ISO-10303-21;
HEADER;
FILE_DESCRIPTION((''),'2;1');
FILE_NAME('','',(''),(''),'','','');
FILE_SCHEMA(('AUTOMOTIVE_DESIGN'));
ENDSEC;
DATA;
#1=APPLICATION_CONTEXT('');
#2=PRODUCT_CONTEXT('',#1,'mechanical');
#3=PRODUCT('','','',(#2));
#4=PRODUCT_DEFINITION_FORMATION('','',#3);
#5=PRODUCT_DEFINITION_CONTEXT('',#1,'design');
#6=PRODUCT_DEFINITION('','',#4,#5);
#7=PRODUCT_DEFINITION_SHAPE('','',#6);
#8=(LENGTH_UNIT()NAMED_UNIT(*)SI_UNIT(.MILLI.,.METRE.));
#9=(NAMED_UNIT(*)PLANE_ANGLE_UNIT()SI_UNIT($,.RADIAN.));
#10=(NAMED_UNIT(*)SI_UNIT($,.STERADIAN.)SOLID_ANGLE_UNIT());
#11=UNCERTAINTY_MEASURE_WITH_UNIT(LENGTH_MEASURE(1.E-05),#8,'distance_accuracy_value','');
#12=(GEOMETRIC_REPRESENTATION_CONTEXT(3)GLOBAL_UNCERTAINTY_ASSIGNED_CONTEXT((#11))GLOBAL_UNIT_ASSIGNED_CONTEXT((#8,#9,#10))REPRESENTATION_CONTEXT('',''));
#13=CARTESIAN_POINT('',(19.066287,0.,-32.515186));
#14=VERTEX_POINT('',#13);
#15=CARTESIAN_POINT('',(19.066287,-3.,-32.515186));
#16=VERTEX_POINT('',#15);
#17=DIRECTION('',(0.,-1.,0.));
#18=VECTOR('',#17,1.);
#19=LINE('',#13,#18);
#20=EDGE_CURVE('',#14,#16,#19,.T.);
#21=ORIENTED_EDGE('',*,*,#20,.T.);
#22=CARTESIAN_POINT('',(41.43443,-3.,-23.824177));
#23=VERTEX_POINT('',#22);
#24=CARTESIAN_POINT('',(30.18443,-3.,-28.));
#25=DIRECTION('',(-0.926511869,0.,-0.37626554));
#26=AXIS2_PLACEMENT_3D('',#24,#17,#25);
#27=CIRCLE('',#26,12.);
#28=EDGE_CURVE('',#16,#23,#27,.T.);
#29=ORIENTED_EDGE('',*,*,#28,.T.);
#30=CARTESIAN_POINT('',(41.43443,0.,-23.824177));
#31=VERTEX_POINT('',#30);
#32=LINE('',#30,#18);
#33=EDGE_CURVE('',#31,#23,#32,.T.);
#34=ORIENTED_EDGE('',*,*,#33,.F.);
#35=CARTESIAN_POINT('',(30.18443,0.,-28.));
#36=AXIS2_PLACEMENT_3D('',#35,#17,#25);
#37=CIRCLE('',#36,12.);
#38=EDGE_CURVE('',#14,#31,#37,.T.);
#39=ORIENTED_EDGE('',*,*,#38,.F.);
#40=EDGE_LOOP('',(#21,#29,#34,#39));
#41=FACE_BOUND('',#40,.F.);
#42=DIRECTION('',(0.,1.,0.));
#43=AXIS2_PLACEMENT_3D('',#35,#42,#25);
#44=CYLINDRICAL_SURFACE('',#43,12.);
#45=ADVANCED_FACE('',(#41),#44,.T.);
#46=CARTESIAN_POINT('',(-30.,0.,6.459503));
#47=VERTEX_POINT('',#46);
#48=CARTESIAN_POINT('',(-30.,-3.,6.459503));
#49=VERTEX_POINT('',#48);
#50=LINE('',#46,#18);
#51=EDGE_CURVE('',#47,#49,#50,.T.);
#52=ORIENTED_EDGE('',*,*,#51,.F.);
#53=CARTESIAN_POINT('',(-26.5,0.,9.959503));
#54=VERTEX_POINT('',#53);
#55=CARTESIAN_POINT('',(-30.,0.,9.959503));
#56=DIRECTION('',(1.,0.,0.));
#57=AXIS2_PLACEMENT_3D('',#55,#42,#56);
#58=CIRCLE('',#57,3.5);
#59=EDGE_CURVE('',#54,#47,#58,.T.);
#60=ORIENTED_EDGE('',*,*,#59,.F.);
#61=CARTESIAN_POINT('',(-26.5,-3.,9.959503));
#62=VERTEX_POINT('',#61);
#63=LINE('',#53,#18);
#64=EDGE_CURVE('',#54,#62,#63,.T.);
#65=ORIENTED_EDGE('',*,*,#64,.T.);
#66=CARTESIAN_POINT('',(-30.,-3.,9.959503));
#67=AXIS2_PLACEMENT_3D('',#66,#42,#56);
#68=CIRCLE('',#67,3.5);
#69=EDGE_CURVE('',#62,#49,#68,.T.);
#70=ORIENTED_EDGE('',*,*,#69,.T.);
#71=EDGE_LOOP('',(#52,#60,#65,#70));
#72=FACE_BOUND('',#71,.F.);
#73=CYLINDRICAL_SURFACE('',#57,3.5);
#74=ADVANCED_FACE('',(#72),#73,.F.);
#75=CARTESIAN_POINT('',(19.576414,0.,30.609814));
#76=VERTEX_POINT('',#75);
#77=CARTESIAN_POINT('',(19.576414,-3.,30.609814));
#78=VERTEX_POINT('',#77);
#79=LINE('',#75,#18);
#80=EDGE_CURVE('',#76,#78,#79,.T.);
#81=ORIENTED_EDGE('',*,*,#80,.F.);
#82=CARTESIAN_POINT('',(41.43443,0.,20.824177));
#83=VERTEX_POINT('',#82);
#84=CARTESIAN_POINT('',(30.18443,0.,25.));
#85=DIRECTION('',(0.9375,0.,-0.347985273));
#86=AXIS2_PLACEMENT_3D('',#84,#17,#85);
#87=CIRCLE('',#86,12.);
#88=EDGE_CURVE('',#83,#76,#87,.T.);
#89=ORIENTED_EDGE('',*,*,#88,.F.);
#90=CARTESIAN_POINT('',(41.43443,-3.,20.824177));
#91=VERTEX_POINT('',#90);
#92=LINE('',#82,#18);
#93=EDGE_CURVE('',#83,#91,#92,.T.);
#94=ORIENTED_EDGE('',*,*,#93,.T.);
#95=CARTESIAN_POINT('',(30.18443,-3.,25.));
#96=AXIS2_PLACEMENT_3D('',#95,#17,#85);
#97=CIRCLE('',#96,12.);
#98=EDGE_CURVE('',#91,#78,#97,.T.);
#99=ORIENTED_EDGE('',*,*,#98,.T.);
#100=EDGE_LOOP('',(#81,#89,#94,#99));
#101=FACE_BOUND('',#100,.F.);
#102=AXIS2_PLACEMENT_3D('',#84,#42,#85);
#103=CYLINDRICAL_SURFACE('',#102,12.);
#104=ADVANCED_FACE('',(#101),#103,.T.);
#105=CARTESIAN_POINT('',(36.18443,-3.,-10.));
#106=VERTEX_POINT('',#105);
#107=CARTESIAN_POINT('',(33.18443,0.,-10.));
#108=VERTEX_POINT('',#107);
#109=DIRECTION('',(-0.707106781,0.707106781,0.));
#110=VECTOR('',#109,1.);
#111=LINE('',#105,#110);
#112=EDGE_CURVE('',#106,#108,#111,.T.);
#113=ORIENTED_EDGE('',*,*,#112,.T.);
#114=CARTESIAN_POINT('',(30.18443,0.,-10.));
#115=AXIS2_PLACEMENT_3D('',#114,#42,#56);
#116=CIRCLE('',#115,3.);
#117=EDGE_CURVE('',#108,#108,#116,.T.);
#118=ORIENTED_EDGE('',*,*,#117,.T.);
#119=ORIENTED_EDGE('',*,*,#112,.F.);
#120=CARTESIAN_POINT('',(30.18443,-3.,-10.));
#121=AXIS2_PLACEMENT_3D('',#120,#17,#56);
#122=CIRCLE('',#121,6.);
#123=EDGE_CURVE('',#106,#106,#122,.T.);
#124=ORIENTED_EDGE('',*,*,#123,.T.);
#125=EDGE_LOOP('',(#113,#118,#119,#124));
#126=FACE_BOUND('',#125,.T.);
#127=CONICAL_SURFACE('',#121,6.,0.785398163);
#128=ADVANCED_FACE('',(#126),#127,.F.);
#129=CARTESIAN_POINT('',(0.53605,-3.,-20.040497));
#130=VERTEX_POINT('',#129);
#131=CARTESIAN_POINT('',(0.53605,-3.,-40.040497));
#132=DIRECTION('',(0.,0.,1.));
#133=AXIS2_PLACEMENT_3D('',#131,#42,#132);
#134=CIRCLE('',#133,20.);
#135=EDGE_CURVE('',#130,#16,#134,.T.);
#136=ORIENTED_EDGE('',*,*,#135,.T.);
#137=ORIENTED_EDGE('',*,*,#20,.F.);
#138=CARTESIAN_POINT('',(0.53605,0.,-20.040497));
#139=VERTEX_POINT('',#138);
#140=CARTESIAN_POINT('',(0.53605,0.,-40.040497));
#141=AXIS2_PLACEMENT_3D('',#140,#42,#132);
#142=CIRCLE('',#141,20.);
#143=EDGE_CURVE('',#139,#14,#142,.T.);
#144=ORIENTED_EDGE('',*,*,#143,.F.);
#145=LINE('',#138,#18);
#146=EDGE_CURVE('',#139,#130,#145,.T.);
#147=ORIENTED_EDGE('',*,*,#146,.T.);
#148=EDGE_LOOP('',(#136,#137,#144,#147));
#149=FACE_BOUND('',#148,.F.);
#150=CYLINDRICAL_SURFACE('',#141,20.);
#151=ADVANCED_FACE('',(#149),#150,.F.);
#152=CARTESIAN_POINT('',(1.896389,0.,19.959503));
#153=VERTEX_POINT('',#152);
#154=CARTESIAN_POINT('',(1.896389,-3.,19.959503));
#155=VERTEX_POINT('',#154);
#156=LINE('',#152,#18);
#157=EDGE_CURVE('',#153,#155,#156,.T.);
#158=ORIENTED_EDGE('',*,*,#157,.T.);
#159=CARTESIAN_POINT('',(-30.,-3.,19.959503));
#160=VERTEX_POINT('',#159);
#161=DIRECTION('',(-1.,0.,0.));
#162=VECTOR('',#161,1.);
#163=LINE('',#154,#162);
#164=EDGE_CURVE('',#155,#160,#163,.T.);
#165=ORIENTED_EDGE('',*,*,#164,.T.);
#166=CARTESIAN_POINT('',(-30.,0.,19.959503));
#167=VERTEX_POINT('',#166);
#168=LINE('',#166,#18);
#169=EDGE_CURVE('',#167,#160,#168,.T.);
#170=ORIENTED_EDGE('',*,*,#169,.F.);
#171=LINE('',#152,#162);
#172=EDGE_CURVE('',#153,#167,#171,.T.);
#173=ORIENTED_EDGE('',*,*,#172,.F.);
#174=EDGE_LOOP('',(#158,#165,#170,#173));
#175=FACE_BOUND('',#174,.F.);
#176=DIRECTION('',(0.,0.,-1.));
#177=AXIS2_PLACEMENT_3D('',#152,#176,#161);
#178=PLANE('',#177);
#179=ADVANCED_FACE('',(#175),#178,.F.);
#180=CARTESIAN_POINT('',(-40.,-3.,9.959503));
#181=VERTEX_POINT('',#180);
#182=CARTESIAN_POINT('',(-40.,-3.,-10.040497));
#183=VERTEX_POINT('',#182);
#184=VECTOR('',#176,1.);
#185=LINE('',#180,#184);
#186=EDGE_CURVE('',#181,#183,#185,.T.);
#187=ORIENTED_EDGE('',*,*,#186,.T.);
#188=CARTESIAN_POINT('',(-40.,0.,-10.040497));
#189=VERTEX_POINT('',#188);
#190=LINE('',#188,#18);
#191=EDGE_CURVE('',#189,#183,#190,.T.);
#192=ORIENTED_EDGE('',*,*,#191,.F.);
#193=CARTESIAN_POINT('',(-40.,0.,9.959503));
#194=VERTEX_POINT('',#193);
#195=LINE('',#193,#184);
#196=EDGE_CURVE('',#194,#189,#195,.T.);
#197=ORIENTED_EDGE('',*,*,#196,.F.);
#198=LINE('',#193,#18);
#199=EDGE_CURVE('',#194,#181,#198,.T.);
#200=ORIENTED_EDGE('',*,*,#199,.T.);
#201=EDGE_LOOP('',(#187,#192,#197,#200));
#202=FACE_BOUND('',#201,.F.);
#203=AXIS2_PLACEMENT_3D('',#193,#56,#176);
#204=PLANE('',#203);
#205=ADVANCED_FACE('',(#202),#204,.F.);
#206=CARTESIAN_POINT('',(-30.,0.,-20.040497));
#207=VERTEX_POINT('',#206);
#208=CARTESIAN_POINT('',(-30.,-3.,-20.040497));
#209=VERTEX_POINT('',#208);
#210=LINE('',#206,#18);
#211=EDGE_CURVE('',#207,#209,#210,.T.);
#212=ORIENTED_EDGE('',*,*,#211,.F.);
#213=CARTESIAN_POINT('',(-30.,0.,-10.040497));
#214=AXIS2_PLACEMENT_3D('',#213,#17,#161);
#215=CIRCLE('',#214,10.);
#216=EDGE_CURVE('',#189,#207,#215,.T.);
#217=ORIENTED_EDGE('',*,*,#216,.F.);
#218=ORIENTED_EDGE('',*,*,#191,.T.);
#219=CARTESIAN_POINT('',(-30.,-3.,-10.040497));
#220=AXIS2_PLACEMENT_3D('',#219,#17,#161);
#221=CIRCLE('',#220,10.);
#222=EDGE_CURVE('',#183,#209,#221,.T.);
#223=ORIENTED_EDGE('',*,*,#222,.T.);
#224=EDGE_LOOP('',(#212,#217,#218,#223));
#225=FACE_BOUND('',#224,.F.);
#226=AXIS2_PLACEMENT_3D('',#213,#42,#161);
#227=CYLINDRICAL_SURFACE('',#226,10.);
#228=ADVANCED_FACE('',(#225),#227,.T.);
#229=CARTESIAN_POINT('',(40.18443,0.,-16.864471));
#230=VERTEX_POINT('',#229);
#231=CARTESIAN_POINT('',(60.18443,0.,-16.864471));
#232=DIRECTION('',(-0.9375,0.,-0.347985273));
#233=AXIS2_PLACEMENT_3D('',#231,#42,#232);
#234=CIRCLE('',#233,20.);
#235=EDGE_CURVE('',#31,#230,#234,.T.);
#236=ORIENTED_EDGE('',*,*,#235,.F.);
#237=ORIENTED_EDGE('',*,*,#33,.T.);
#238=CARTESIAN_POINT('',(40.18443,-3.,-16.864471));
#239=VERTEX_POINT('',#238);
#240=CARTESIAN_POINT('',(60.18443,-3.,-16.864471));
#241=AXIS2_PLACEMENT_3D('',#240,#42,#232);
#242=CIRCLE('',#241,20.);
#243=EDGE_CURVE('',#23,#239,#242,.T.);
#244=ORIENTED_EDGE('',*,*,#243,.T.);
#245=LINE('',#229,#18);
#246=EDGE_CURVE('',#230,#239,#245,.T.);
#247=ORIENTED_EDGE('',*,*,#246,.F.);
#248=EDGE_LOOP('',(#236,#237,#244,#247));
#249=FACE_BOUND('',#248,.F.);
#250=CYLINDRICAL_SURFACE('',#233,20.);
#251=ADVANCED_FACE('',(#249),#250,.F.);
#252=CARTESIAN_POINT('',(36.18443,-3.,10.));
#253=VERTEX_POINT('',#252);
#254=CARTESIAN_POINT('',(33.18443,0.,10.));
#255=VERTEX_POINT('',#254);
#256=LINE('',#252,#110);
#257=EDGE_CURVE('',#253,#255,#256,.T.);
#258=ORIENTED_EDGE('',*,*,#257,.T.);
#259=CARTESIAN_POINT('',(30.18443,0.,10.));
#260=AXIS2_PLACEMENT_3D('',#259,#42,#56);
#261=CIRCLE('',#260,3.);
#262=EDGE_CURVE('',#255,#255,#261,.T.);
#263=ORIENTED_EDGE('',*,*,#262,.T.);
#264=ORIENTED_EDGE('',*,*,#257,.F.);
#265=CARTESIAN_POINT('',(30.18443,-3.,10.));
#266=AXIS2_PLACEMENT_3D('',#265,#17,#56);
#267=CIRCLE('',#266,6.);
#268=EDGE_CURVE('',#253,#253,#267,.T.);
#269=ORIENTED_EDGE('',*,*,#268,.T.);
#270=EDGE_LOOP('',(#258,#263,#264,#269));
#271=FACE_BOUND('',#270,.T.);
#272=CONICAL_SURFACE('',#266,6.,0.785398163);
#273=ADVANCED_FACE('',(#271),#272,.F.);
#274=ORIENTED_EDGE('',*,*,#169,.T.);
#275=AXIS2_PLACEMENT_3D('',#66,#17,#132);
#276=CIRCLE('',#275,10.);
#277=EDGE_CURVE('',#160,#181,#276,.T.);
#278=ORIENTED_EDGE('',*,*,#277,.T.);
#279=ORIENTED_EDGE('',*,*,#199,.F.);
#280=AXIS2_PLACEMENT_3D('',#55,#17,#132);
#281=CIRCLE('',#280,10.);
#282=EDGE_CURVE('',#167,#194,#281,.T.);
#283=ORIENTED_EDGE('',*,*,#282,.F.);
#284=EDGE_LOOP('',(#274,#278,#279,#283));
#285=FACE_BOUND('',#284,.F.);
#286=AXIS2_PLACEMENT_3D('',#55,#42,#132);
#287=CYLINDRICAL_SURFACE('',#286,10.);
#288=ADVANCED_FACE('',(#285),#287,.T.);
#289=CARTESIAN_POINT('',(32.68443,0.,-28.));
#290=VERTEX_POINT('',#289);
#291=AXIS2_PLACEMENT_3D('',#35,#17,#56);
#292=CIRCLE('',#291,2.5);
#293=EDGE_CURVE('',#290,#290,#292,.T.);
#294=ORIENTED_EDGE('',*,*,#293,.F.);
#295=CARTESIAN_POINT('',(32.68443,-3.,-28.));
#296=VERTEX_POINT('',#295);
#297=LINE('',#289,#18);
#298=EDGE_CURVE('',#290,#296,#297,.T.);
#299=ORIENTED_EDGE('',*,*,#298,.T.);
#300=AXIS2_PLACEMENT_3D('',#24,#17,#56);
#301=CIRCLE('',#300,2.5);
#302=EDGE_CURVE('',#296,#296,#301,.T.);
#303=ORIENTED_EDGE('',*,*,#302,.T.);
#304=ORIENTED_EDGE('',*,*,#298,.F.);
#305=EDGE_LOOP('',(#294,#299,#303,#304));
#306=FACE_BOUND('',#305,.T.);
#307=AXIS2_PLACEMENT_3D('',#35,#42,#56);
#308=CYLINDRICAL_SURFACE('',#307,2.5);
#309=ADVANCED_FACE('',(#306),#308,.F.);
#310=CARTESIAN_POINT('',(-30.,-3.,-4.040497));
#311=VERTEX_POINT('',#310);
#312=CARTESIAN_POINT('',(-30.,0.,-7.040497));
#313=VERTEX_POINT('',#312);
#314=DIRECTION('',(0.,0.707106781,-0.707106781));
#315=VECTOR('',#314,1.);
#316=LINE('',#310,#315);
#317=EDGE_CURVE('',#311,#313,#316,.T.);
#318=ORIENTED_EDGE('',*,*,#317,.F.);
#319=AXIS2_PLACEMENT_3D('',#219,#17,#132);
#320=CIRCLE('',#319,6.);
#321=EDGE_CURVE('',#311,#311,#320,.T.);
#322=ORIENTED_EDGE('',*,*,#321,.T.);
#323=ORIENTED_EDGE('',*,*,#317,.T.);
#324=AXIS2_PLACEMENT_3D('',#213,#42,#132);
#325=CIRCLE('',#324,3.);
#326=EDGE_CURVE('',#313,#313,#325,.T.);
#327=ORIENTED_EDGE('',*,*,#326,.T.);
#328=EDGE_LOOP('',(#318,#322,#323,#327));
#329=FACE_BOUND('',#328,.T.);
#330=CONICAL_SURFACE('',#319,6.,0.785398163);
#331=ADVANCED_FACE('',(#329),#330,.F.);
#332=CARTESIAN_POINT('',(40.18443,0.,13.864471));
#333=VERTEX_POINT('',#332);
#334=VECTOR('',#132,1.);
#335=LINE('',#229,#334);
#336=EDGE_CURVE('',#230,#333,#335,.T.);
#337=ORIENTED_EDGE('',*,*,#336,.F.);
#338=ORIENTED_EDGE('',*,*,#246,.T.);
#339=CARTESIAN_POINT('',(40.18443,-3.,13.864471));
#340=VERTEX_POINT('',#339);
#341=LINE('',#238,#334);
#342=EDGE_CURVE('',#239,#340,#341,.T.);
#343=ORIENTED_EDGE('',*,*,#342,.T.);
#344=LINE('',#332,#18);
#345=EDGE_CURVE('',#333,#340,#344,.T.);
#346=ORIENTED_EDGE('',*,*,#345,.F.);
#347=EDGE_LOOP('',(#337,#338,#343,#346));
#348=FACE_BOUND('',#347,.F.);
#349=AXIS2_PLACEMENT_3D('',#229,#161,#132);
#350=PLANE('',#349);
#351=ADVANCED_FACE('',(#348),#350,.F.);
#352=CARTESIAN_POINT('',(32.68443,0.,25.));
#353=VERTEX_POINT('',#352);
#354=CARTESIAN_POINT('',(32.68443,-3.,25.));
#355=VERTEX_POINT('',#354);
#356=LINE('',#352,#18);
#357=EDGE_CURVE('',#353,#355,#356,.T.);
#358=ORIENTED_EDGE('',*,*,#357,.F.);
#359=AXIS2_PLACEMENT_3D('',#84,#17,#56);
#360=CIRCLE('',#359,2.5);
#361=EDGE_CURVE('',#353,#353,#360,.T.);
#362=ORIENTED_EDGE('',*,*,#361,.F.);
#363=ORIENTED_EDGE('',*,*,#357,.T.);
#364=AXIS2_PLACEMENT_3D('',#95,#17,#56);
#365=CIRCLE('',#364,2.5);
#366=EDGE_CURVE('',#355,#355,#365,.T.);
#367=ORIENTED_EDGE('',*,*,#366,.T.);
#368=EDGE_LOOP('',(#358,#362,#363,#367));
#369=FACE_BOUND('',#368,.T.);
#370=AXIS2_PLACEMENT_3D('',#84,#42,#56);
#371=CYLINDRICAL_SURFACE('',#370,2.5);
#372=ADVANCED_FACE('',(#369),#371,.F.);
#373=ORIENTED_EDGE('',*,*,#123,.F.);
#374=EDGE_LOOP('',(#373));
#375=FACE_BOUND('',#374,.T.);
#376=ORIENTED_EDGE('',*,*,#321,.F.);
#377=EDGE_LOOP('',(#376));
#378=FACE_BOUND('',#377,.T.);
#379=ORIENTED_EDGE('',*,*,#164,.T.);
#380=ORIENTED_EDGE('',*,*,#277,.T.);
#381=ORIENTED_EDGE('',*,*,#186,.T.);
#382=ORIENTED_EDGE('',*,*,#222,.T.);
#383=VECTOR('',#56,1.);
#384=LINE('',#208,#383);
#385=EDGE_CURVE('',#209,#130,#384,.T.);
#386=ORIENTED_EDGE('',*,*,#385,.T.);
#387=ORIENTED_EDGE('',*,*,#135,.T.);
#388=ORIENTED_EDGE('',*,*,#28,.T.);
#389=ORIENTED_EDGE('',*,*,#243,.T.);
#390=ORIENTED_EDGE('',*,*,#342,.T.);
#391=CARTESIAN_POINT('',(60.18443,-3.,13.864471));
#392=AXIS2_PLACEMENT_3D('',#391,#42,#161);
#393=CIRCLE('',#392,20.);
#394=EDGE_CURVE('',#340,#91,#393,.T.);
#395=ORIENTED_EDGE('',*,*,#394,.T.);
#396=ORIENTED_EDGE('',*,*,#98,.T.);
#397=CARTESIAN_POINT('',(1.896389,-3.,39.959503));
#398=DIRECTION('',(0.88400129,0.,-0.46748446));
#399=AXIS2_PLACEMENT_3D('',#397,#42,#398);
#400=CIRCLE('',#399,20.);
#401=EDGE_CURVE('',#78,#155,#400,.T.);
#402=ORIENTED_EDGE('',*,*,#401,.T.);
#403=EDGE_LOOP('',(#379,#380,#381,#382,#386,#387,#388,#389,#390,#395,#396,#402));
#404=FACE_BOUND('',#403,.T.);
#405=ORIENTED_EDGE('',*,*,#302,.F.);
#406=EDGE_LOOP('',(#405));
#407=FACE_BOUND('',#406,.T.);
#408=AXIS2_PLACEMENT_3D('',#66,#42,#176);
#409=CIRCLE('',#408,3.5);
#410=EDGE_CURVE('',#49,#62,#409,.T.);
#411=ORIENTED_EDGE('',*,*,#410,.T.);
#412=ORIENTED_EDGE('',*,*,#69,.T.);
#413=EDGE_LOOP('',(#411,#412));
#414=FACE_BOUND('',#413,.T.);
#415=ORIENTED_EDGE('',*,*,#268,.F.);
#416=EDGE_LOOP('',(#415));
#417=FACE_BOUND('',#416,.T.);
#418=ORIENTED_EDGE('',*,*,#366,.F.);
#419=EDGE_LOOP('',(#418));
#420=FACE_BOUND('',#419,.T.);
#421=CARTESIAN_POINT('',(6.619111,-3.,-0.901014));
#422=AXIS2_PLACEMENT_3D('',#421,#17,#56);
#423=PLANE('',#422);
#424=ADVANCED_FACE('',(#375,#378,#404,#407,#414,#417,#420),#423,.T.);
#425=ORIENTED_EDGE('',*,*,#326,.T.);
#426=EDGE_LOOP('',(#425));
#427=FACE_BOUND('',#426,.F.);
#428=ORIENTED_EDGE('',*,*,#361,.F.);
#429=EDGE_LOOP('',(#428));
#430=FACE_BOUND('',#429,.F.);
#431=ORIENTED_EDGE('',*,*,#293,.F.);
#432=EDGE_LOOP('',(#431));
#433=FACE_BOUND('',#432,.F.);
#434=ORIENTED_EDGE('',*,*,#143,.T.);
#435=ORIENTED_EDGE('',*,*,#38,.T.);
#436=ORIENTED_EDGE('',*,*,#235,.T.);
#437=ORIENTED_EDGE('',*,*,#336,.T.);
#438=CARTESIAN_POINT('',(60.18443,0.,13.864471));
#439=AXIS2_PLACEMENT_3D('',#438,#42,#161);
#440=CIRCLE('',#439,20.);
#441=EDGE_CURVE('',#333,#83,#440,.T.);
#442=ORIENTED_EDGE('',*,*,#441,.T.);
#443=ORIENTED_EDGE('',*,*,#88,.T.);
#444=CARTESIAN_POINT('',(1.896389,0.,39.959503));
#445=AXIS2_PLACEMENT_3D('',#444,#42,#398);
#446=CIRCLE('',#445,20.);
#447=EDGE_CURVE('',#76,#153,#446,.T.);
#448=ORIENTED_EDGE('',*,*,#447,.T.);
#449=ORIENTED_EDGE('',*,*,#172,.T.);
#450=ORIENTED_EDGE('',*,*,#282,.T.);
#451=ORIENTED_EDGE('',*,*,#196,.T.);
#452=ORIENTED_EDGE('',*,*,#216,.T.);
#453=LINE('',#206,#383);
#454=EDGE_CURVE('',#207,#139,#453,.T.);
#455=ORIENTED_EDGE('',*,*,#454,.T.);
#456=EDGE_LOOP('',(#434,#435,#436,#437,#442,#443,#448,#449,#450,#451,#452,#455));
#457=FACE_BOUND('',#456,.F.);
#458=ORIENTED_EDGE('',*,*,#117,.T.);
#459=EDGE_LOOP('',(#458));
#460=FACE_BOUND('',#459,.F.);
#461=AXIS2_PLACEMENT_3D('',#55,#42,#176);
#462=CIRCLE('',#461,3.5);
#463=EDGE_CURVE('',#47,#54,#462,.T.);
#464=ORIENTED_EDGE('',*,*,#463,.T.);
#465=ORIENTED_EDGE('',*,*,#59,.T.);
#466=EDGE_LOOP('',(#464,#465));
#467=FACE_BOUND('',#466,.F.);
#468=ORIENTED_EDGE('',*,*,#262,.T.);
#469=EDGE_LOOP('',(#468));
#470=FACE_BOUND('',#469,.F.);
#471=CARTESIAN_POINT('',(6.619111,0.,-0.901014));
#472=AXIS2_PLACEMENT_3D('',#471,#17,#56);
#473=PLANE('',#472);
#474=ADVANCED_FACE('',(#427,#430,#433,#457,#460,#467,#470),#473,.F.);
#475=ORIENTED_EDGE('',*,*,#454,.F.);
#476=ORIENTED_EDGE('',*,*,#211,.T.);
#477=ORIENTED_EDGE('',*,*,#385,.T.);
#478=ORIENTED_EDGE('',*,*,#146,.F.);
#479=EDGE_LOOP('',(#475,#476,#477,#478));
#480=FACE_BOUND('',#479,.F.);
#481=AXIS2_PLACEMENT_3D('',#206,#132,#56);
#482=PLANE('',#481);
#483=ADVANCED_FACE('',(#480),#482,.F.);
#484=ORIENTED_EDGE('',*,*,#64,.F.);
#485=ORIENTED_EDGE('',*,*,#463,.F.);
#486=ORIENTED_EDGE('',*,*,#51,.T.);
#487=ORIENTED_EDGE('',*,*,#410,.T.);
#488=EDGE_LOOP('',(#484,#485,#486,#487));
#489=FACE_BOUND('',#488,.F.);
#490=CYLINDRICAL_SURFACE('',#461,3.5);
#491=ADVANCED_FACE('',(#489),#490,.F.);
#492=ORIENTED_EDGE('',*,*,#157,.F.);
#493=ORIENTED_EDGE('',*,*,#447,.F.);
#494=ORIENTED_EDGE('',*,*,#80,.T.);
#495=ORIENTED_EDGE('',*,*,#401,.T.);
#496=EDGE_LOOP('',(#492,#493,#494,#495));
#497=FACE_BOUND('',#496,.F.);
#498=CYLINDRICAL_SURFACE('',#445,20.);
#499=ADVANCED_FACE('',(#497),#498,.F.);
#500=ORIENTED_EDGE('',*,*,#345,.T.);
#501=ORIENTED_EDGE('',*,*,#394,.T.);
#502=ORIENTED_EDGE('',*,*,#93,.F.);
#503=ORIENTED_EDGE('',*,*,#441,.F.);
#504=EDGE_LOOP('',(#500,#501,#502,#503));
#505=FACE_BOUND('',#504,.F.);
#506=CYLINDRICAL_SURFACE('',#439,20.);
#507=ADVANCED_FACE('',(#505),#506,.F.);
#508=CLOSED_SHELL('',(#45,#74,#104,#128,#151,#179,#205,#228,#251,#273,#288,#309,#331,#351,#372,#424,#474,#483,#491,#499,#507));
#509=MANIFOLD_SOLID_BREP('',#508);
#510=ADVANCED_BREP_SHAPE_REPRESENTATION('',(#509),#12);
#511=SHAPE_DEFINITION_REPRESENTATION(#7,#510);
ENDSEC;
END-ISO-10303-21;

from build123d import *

# Parameters (mm, degrees)
F0_R     = 2.5
F1_DEPTH = 3


# Not quite as in the source:
# - a fillet or chamfer that OpenCascade refuses, or shapes differently, is made with other operations: its cross-section is extruded or revolved along the edge and cut away or added


with BuildPart() as f1:
    # F0 (on Front) → F1 (new body)
    with BuildSketch(Plane.XZ):
        with BuildLine():
            Line((40.1844298095, -16.8644712743), (40.1844298095, 13.8644712743))
            ThreePointArc((40.1844298095, 13.8644712743), (40.4994101244, 17.4000051803), (41.4344298095, 20.8241767279))
            ThreePointArc((41.4344298095, 20.8241767279), (35.0877662109, 35.9525016382), (19.5764143341, 30.6098135152))
            ThreePointArc((19.5764143341, 30.6098135152), (12.2164228481, 22.827751719), (1.8963885419, 19.9595027072))
            Line((1.8963885419, 19.9595027072), (-30, 19.9595027072))
            ThreePointArc((-30, 19.9595027072), (-37.0710678119, 17.030570519), (-40, 9.9595027072))
            Line((-40, 9.9595027072), (-40, -10.0404972928))
            ThreePointArc((-40, -10.0404972928), (-37.0710678119, -17.1115651047), (-30, -20.0404972928))
            Line((-30, -20.0404972928), (0.5360500065, -20.0404972928))
            ThreePointArc((0.5360500065, -20.0404972928), (11.7050648207, -23.4497436005), (19.0662873833, -32.5151864848))
            ThreePointArc((19.0662873833, -32.5151864848), (34.5304347857, -39.18535832), (41.4344298095, -23.8241767279))
            ThreePointArc((41.4344298095, -23.8241767279), (40.4994101244, -20.4000051803), (40.1844298095, -16.8644712743))
        make_face()
        with BuildLine():
            ThreePointArc((-30, -7.5404972928), (-28.232233047, -8.2727303399), (-27.5, -10.0404972928))
            ThreePointArc((-27.5, -10.0404972928), (-31.767766953, -11.8082642458), (-30, -7.5404972928))
        make_face(mode=Mode.SUBTRACT)
        with Locations((30.1844298095, -28)):
            Circle(F0_R, mode=Mode.SUBTRACT)
        with Locations((30.1844298095, -10)):
            Circle(F0_R, mode=Mode.SUBTRACT)
        with BuildLine():
            ThreePointArc((-26.5, 9.9595027072), (-27.5251262658, 7.484628973), (-30, 6.4595027072))
            ThreePointArc((-30, 6.4595027072), (-32.4748737342, 12.4343764413), (-26.5, 9.9595027072))
        make_face(mode=Mode.SUBTRACT)
        with Locations((30.1844298095, 10)):
            Circle(F0_R, mode=Mode.SUBTRACT)
        with Locations((30.1844298095, 25)):
            Circle(F0_R, mode=Mode.SUBTRACT)
    extrude(amount=F1_DEPTH)

    # F2: chamfer of 3.5 on 3 edges, made by hand

    # F2_s1 → F2_t2 (revolve, cut)
    with BuildSketch(Plane.YZ.offset(-30)):
        Polygon((-3, -4.0404972928), (0.5, -7.5404972928), (-3, -7.5404972928), align=None)
    revolve(axis=Axis((-30, -3, -10.0404972928), (0, -1, 0)), mode=Mode.SUBTRACT)

    # F2_s3 → F2_t4 (revolve, cut)
    with BuildSketch(Plane.XY.offset(-10)):
        Polygon((36.1844298095, -3), (32.6844298095, 0.5), (32.6844298095, -3), align=None)
    revolve(axis=Axis((30.1844298095, -3, -10), (0, -1, 0)), mode=Mode.SUBTRACT)

    # F2_s5 → F2_t6 (revolve, cut)
    with BuildSketch(Plane.XY.offset(10)):
        Polygon((36.1844298095, -3), (32.6844298095, 0.5), (32.6844298095, -3), align=None)
    revolve(axis=Axis((30.1844298095, -3, 10), (0, -1, 0)), mode=Mode.SUBTRACT)


solid = f1.part
